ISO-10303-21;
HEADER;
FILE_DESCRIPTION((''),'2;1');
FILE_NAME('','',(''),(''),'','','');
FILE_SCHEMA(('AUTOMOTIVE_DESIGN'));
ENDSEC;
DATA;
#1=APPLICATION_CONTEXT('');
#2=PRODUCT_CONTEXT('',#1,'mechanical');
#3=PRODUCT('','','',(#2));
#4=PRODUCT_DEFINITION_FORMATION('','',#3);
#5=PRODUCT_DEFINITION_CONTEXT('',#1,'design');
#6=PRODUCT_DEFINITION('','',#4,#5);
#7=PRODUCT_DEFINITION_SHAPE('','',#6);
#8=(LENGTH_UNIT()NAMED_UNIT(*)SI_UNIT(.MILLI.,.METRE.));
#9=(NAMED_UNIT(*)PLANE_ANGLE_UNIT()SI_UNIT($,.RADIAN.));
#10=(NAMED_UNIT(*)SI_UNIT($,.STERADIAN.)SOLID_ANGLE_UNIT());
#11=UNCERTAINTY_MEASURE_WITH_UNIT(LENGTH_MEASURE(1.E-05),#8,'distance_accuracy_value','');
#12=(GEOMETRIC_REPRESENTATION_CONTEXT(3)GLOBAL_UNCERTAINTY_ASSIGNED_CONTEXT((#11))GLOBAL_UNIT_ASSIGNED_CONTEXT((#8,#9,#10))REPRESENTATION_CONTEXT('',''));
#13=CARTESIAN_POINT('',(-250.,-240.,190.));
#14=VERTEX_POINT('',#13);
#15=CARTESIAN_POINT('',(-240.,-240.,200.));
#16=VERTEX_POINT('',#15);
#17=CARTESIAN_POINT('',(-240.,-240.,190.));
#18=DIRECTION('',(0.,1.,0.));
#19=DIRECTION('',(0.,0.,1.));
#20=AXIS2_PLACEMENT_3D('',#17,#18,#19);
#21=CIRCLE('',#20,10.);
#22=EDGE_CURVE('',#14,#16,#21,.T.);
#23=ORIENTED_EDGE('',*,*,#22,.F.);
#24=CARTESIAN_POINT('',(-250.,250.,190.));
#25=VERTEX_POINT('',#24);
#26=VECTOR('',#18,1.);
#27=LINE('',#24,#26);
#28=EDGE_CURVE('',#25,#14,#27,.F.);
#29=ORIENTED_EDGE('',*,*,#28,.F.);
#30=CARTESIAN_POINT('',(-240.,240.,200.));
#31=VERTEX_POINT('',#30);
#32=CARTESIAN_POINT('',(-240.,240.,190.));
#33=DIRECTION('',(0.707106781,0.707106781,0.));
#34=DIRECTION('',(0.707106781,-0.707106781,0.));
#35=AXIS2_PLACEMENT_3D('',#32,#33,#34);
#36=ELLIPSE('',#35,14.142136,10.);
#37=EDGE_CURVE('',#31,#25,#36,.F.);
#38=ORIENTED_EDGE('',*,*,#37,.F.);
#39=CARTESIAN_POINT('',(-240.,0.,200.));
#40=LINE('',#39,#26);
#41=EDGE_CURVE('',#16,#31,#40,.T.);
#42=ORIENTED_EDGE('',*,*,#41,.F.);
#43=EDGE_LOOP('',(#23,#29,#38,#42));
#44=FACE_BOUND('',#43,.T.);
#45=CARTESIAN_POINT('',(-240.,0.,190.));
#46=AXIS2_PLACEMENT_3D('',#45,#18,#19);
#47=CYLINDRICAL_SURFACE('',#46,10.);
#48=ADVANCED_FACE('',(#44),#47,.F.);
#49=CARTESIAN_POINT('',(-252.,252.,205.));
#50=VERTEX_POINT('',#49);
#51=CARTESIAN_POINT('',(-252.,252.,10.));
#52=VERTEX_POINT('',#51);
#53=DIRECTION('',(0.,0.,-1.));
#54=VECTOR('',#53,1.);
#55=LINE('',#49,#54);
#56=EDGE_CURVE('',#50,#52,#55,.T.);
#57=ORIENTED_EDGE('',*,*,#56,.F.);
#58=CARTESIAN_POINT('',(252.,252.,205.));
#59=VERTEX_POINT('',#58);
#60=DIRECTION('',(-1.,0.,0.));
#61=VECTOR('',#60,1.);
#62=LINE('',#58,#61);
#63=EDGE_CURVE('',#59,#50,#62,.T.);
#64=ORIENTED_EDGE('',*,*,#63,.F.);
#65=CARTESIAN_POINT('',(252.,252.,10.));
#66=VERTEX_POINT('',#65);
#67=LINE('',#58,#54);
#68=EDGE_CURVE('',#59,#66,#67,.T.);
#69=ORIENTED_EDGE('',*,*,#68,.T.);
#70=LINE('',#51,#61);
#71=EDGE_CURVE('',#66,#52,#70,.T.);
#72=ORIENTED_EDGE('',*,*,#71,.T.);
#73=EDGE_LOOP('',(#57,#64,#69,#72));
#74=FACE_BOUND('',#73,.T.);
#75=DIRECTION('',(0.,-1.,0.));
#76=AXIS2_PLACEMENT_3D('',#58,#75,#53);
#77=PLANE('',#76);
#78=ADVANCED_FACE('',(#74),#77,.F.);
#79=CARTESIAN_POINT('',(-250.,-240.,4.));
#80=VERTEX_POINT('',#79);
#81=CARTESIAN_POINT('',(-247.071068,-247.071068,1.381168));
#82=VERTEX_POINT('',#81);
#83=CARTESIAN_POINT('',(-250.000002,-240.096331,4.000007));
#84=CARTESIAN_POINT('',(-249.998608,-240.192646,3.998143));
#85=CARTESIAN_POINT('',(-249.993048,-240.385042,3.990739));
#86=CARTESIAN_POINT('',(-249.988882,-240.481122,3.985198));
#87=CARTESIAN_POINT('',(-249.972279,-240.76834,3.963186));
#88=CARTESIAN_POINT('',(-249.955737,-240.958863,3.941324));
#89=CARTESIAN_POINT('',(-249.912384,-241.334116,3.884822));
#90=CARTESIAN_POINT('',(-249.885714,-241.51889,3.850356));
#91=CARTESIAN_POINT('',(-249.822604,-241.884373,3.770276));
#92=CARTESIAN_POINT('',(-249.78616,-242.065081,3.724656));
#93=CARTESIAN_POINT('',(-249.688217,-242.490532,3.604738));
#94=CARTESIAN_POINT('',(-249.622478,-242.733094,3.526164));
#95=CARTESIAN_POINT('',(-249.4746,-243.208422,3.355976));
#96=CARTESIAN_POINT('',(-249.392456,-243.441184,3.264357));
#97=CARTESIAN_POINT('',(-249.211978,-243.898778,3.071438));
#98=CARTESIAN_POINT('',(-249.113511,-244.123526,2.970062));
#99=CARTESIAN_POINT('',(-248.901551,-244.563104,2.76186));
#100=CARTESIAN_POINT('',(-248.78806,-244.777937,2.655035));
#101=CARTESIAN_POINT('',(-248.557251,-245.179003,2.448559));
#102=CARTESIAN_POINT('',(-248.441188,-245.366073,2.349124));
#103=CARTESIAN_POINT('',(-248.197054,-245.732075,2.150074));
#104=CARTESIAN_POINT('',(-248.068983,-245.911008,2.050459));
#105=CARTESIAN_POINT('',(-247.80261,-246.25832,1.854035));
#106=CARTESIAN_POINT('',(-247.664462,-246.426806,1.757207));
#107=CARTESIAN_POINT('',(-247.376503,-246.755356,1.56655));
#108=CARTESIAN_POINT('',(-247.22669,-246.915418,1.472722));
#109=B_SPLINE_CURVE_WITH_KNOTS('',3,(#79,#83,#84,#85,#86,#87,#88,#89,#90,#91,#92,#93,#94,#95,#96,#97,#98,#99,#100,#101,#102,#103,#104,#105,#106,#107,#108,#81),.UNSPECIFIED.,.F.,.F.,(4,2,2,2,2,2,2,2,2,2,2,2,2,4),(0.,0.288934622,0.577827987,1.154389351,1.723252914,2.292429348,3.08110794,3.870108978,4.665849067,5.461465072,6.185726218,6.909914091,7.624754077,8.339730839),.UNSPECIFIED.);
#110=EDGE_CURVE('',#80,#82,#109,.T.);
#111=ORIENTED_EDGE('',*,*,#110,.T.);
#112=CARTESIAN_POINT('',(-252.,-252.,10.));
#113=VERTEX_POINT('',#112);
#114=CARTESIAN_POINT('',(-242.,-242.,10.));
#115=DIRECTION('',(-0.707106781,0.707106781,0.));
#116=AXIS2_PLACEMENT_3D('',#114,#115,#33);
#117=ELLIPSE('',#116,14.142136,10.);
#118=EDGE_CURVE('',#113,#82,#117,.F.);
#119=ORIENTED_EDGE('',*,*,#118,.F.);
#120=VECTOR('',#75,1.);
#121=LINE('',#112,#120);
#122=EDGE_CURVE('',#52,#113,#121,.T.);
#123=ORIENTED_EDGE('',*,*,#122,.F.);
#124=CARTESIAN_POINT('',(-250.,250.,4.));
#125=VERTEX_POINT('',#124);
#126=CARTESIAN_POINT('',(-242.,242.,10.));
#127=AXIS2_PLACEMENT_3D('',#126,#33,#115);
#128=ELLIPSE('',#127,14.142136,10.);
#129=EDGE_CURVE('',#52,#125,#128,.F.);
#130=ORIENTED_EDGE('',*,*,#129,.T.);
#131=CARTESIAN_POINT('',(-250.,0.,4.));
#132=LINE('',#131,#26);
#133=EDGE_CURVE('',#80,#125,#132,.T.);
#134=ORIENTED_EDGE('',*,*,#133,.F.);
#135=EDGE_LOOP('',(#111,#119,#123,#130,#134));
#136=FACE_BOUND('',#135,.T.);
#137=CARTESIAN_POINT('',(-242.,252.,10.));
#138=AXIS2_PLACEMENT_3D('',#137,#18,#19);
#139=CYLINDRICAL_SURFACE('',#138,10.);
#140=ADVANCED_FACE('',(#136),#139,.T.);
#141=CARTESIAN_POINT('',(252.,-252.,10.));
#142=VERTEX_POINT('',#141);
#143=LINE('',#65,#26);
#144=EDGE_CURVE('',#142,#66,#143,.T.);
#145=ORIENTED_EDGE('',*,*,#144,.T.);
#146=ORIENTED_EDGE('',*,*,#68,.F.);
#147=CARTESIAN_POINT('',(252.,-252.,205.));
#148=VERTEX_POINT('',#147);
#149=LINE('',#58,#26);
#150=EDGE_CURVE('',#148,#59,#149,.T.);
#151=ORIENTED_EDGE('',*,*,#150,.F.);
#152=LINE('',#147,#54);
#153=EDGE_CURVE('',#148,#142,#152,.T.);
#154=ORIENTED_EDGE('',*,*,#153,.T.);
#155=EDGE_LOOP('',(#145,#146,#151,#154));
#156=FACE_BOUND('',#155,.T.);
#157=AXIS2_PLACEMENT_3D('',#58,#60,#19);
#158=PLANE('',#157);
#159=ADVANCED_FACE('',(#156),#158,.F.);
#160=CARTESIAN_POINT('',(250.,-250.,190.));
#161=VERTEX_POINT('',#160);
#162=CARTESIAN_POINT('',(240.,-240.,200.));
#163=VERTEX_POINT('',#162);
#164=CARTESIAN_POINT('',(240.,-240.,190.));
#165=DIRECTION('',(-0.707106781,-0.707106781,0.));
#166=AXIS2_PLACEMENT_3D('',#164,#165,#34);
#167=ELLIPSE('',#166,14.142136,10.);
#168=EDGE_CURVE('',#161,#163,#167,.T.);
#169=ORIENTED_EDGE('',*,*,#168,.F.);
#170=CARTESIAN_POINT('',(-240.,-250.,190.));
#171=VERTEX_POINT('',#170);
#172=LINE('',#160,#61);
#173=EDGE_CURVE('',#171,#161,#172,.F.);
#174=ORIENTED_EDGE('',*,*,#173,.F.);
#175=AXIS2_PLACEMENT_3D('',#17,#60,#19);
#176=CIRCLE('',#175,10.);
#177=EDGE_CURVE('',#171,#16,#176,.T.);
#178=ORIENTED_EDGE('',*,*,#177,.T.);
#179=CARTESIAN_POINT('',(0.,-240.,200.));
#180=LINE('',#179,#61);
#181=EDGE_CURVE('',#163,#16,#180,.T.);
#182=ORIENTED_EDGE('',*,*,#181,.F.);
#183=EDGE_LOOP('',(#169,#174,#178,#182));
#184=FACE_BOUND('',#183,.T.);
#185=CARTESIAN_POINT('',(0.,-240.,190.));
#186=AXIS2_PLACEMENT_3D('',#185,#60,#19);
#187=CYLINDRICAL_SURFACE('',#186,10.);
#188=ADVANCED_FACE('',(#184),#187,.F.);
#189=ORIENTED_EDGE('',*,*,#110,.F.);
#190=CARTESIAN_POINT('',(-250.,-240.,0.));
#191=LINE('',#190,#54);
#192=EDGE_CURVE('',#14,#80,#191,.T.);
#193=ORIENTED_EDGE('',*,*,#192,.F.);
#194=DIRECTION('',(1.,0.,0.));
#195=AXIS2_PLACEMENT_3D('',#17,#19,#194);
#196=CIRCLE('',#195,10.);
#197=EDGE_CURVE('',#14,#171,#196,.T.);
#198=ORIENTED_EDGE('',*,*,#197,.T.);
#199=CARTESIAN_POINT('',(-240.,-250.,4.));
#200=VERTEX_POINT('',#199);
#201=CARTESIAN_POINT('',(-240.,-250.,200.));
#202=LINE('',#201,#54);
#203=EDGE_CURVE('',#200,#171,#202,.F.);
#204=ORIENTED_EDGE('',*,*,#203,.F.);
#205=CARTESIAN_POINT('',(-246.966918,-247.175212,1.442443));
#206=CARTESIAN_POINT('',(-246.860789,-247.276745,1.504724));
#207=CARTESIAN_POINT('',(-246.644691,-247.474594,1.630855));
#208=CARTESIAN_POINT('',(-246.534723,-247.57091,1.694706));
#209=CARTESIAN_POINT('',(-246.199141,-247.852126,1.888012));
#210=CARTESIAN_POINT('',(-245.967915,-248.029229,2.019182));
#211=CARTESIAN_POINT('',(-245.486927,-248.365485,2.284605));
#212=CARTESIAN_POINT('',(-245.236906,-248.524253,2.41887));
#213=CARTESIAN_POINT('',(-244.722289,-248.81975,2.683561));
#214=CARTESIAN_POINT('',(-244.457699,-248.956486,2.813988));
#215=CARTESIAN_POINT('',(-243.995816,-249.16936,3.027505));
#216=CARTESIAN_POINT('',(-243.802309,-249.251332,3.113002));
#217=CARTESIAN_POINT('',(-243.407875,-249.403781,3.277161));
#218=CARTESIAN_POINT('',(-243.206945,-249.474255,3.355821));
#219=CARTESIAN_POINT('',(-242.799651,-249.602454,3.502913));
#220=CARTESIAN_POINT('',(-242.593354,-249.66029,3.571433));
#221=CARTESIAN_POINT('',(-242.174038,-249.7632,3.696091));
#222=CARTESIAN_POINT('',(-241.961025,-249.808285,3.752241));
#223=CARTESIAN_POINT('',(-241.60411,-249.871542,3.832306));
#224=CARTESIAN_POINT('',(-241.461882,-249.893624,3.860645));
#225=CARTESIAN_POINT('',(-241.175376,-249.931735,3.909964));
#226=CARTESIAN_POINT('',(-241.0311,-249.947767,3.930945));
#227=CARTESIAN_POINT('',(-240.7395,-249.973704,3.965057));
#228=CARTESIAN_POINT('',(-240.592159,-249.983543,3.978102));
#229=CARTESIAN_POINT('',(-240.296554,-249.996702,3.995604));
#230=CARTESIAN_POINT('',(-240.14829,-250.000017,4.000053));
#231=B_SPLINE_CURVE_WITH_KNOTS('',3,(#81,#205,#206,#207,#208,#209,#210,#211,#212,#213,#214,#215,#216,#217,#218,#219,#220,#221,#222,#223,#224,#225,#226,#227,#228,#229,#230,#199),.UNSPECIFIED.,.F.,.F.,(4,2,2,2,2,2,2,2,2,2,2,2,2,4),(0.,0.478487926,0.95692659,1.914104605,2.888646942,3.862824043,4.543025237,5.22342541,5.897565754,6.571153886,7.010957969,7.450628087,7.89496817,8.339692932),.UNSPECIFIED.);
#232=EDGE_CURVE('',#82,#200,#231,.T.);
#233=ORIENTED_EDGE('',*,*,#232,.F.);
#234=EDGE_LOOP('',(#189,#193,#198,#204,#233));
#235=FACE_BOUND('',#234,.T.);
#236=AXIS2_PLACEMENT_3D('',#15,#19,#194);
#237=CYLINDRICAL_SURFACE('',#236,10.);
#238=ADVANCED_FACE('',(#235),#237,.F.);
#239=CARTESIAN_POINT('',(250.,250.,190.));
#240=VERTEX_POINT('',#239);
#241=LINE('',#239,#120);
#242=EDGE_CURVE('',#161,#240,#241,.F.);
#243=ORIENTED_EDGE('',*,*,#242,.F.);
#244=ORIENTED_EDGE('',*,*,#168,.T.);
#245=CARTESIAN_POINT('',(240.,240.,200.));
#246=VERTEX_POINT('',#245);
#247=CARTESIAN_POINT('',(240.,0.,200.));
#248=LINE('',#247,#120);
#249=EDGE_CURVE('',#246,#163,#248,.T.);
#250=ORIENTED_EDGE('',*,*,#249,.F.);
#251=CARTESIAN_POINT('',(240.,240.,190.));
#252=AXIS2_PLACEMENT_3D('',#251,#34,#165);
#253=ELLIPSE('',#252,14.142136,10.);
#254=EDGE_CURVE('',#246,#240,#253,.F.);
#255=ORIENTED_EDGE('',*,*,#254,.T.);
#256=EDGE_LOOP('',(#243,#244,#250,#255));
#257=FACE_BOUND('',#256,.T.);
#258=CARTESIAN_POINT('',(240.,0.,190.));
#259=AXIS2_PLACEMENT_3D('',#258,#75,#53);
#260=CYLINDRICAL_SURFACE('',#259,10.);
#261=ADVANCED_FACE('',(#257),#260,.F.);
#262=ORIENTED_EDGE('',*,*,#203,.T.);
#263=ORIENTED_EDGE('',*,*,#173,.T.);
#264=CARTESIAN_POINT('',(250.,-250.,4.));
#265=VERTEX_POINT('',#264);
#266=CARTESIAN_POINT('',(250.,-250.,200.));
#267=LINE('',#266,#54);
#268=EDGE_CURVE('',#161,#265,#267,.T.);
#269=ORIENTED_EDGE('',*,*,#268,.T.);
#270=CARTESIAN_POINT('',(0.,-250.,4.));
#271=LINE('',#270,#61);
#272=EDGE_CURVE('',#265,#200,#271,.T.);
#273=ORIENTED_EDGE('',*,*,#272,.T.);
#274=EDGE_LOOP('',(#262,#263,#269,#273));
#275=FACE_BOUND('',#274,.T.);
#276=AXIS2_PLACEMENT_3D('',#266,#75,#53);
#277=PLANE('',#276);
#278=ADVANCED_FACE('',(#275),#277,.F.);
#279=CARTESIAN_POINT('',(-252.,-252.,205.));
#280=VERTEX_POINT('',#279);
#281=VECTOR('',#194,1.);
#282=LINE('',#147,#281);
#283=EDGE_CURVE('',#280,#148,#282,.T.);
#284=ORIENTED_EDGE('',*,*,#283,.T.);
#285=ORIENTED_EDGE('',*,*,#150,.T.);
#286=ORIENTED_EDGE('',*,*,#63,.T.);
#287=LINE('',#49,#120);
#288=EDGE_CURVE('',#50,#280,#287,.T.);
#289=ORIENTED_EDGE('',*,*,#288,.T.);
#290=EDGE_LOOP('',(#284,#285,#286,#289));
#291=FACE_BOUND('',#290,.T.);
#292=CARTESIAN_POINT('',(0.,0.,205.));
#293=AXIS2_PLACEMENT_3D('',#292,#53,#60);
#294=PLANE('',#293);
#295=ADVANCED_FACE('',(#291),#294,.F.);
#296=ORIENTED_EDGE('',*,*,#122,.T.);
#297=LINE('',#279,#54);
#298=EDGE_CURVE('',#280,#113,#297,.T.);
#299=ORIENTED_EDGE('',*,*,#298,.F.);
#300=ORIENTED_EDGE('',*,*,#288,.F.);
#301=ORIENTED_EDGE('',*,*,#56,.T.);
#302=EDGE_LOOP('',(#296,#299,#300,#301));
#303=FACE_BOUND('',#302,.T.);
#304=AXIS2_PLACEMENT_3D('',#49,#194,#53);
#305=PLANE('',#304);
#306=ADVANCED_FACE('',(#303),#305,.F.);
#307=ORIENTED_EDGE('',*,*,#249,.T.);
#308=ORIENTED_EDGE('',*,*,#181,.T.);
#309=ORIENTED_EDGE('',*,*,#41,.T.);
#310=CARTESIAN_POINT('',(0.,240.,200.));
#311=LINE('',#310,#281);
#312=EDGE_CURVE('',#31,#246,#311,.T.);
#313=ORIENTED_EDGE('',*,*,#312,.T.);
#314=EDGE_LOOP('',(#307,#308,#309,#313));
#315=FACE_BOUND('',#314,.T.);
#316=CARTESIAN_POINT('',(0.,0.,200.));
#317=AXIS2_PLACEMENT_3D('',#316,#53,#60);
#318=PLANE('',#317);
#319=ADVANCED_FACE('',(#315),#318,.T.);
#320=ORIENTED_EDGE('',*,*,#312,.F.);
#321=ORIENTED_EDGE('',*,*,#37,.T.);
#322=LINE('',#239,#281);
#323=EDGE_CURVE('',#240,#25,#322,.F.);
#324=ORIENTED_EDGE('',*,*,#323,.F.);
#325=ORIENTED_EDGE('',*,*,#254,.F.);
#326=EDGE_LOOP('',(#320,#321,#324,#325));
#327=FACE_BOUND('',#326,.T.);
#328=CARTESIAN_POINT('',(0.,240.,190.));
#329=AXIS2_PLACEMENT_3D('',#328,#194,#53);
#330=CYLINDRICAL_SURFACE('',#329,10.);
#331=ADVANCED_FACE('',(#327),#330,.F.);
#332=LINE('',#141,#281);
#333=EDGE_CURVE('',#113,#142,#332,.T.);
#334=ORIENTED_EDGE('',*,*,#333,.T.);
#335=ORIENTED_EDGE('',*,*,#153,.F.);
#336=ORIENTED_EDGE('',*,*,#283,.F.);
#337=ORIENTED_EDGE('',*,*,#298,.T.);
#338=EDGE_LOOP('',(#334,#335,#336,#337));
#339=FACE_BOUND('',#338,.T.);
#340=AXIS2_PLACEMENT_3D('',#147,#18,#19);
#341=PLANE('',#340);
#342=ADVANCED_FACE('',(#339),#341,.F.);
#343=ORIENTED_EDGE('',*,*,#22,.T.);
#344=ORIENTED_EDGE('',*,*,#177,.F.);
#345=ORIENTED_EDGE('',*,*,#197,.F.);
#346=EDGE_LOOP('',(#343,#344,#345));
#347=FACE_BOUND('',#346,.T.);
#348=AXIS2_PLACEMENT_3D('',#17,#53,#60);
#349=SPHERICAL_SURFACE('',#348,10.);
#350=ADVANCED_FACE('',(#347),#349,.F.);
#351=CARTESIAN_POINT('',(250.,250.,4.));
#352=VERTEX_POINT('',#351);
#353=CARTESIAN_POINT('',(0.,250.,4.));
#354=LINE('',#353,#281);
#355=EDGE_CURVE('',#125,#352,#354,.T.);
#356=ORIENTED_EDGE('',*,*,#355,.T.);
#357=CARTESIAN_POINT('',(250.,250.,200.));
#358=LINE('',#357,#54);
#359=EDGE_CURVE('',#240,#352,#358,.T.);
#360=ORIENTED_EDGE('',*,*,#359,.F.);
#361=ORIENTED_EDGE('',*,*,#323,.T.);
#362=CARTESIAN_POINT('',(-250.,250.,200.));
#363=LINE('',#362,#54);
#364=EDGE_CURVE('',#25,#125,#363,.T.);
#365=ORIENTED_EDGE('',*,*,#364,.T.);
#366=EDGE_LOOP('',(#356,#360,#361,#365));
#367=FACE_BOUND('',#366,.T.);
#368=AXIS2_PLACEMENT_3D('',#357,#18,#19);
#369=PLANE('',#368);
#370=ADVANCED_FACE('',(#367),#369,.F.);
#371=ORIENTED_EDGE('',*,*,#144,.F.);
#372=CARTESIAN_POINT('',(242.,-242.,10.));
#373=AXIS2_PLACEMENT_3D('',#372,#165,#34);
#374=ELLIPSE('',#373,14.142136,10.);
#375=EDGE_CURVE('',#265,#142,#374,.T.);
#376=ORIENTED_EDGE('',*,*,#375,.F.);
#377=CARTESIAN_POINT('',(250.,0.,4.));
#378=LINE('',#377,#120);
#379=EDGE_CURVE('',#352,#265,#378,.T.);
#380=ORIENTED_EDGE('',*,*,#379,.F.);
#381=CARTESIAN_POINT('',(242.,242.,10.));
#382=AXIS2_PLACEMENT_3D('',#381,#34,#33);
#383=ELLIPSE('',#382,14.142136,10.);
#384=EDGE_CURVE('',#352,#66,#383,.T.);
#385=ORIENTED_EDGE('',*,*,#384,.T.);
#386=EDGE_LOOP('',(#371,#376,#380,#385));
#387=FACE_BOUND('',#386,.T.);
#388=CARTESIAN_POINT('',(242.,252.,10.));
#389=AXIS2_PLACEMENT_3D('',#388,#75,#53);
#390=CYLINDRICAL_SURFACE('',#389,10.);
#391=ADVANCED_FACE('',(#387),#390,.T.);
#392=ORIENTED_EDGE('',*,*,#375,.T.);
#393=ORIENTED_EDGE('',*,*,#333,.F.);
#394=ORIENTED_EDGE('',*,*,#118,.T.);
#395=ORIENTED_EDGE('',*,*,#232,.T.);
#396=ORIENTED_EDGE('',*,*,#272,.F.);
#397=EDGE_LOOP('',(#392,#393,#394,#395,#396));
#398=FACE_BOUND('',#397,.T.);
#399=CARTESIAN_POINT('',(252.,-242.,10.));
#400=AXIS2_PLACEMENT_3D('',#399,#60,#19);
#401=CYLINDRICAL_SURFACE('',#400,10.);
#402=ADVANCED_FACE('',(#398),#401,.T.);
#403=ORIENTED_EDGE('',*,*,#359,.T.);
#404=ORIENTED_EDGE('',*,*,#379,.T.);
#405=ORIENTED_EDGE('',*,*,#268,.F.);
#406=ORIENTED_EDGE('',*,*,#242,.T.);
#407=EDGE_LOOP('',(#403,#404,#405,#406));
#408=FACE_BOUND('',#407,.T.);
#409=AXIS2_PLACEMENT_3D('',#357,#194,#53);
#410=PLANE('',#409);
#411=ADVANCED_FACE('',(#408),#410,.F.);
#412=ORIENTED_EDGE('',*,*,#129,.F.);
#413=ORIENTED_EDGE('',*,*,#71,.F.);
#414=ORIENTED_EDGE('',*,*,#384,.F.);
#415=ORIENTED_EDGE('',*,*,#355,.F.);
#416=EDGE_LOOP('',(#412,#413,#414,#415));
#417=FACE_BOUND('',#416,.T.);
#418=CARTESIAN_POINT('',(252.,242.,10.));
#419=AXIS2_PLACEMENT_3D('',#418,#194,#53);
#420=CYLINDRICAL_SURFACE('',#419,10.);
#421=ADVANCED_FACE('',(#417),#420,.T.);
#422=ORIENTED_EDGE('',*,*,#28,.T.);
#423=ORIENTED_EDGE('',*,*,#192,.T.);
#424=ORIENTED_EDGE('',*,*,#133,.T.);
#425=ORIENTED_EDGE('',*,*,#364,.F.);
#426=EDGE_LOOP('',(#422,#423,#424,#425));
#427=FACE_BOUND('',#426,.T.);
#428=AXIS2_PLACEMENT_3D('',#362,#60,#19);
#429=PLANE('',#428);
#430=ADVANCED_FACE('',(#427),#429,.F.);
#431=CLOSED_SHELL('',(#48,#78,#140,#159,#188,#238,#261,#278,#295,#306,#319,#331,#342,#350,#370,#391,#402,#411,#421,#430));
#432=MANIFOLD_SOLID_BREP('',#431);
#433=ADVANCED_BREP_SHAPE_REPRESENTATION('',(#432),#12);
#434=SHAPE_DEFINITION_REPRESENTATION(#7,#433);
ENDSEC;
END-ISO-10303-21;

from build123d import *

# Parameters (mm, degrees)
SKETCH1_W           = 504
SKETCH1_H           = 504
BOSS_EXTRUDE1_DEPTH = 205
SKETCH2_W           = 500
SKETCH2_H           = 500
CUT_EXTRUDE1_DEPTH  = 200
FILLET2_R           = 10
FILLET4_R           = 10


with BuildPart() as part:
    # Sketch1 → Boss-Extrude1 (new body)
    with BuildSketch(Plane.XY):
        Rectangle(SKETCH1_W, SKETCH1_H)
    extrude(amount=BOSS_EXTRUDE1_DEPTH)

    # Sketch2 → Cut-Extrude1 (cut)
    with BuildSketch(Plane(origin=(0, 0, 0), x_dir=(-1, 0, 0), z_dir=(0, 0, -1))):
        Rectangle(SKETCH2_W, SKETCH2_H)
    extrude(amount=-CUT_EXTRUDE1_DEPTH, mode=Mode.SUBTRACT)

    # Fillet2
    # the kernel refuses this fillet: 10 mm, written as the material it adds along each edge
    with BuildSketch(Plane(origin=(-250, -250, 0), x_dir=(0, 1, 0), z_dir=(0, 0, 1))) as fillet2_piece_1:
        with BuildLine():
            CenterArc((FILLET2_R, -FILLET2_R), FILLET2_R, 90, 90)
            Line((0, -FILLET2_R), (0, 0))
            Line((0, 0), (FILLET2_R, 0))
        make_face()
    extrude(amount=200)
    # the kernel refuses this fillet: 10 mm, written as the material it takes off along each edge
    with BuildSketch(Plane(origin=(-277, -252, 0), x_dir=(0, 1, 0), z_dir=(1, 0, 0))) as fillet2_2_piece_1:
        with BuildLine():
            CenterArc((FILLET2_R, FILLET2_R), FILLET2_R, 180, 90)
            Line((0, FILLET2_R), (0, 0))
            Line((0, 0), (FILLET2_R, 0))
        make_face()
    extrude(amount=554, mode=Mode.SUBTRACT)
    with BuildSketch(Plane(origin=(252, -277, 0), x_dir=(0, 0, 1), z_dir=(0, 1, 0)), Plane(origin=(277, 252, 0), x_dir=(0, 0, 1), z_dir=(-1, 0, 0)), Plane(origin=(-252, 277, 0), x_dir=(0, 0, 1), z_dir=(0, -1, 0))) as fillet2_2_piece_2:
        with BuildLine():
            CenterArc((FILLET2_R, -FILLET2_R), FILLET2_R, 90, 90)
            Line((0, -FILLET2_R), (0, 0))
            Line((0, 0), (FILLET2_R, 0))
        make_face()
    extrude(amount=554, mode=Mode.SUBTRACT)

    # Fillet4
    fillet4_edges = [part.edges().sort_by_distance(p)[0] for p in [
        (5, -250, 200),
        (250, 0, 200),
        (0, 250, 200),
        (-250, 5, 200),
        (-247.071067812, -247.071067812, 200),
    ]]
    fillet(fillet4_edges, radius=FILLET4_R)


solid = part.part
